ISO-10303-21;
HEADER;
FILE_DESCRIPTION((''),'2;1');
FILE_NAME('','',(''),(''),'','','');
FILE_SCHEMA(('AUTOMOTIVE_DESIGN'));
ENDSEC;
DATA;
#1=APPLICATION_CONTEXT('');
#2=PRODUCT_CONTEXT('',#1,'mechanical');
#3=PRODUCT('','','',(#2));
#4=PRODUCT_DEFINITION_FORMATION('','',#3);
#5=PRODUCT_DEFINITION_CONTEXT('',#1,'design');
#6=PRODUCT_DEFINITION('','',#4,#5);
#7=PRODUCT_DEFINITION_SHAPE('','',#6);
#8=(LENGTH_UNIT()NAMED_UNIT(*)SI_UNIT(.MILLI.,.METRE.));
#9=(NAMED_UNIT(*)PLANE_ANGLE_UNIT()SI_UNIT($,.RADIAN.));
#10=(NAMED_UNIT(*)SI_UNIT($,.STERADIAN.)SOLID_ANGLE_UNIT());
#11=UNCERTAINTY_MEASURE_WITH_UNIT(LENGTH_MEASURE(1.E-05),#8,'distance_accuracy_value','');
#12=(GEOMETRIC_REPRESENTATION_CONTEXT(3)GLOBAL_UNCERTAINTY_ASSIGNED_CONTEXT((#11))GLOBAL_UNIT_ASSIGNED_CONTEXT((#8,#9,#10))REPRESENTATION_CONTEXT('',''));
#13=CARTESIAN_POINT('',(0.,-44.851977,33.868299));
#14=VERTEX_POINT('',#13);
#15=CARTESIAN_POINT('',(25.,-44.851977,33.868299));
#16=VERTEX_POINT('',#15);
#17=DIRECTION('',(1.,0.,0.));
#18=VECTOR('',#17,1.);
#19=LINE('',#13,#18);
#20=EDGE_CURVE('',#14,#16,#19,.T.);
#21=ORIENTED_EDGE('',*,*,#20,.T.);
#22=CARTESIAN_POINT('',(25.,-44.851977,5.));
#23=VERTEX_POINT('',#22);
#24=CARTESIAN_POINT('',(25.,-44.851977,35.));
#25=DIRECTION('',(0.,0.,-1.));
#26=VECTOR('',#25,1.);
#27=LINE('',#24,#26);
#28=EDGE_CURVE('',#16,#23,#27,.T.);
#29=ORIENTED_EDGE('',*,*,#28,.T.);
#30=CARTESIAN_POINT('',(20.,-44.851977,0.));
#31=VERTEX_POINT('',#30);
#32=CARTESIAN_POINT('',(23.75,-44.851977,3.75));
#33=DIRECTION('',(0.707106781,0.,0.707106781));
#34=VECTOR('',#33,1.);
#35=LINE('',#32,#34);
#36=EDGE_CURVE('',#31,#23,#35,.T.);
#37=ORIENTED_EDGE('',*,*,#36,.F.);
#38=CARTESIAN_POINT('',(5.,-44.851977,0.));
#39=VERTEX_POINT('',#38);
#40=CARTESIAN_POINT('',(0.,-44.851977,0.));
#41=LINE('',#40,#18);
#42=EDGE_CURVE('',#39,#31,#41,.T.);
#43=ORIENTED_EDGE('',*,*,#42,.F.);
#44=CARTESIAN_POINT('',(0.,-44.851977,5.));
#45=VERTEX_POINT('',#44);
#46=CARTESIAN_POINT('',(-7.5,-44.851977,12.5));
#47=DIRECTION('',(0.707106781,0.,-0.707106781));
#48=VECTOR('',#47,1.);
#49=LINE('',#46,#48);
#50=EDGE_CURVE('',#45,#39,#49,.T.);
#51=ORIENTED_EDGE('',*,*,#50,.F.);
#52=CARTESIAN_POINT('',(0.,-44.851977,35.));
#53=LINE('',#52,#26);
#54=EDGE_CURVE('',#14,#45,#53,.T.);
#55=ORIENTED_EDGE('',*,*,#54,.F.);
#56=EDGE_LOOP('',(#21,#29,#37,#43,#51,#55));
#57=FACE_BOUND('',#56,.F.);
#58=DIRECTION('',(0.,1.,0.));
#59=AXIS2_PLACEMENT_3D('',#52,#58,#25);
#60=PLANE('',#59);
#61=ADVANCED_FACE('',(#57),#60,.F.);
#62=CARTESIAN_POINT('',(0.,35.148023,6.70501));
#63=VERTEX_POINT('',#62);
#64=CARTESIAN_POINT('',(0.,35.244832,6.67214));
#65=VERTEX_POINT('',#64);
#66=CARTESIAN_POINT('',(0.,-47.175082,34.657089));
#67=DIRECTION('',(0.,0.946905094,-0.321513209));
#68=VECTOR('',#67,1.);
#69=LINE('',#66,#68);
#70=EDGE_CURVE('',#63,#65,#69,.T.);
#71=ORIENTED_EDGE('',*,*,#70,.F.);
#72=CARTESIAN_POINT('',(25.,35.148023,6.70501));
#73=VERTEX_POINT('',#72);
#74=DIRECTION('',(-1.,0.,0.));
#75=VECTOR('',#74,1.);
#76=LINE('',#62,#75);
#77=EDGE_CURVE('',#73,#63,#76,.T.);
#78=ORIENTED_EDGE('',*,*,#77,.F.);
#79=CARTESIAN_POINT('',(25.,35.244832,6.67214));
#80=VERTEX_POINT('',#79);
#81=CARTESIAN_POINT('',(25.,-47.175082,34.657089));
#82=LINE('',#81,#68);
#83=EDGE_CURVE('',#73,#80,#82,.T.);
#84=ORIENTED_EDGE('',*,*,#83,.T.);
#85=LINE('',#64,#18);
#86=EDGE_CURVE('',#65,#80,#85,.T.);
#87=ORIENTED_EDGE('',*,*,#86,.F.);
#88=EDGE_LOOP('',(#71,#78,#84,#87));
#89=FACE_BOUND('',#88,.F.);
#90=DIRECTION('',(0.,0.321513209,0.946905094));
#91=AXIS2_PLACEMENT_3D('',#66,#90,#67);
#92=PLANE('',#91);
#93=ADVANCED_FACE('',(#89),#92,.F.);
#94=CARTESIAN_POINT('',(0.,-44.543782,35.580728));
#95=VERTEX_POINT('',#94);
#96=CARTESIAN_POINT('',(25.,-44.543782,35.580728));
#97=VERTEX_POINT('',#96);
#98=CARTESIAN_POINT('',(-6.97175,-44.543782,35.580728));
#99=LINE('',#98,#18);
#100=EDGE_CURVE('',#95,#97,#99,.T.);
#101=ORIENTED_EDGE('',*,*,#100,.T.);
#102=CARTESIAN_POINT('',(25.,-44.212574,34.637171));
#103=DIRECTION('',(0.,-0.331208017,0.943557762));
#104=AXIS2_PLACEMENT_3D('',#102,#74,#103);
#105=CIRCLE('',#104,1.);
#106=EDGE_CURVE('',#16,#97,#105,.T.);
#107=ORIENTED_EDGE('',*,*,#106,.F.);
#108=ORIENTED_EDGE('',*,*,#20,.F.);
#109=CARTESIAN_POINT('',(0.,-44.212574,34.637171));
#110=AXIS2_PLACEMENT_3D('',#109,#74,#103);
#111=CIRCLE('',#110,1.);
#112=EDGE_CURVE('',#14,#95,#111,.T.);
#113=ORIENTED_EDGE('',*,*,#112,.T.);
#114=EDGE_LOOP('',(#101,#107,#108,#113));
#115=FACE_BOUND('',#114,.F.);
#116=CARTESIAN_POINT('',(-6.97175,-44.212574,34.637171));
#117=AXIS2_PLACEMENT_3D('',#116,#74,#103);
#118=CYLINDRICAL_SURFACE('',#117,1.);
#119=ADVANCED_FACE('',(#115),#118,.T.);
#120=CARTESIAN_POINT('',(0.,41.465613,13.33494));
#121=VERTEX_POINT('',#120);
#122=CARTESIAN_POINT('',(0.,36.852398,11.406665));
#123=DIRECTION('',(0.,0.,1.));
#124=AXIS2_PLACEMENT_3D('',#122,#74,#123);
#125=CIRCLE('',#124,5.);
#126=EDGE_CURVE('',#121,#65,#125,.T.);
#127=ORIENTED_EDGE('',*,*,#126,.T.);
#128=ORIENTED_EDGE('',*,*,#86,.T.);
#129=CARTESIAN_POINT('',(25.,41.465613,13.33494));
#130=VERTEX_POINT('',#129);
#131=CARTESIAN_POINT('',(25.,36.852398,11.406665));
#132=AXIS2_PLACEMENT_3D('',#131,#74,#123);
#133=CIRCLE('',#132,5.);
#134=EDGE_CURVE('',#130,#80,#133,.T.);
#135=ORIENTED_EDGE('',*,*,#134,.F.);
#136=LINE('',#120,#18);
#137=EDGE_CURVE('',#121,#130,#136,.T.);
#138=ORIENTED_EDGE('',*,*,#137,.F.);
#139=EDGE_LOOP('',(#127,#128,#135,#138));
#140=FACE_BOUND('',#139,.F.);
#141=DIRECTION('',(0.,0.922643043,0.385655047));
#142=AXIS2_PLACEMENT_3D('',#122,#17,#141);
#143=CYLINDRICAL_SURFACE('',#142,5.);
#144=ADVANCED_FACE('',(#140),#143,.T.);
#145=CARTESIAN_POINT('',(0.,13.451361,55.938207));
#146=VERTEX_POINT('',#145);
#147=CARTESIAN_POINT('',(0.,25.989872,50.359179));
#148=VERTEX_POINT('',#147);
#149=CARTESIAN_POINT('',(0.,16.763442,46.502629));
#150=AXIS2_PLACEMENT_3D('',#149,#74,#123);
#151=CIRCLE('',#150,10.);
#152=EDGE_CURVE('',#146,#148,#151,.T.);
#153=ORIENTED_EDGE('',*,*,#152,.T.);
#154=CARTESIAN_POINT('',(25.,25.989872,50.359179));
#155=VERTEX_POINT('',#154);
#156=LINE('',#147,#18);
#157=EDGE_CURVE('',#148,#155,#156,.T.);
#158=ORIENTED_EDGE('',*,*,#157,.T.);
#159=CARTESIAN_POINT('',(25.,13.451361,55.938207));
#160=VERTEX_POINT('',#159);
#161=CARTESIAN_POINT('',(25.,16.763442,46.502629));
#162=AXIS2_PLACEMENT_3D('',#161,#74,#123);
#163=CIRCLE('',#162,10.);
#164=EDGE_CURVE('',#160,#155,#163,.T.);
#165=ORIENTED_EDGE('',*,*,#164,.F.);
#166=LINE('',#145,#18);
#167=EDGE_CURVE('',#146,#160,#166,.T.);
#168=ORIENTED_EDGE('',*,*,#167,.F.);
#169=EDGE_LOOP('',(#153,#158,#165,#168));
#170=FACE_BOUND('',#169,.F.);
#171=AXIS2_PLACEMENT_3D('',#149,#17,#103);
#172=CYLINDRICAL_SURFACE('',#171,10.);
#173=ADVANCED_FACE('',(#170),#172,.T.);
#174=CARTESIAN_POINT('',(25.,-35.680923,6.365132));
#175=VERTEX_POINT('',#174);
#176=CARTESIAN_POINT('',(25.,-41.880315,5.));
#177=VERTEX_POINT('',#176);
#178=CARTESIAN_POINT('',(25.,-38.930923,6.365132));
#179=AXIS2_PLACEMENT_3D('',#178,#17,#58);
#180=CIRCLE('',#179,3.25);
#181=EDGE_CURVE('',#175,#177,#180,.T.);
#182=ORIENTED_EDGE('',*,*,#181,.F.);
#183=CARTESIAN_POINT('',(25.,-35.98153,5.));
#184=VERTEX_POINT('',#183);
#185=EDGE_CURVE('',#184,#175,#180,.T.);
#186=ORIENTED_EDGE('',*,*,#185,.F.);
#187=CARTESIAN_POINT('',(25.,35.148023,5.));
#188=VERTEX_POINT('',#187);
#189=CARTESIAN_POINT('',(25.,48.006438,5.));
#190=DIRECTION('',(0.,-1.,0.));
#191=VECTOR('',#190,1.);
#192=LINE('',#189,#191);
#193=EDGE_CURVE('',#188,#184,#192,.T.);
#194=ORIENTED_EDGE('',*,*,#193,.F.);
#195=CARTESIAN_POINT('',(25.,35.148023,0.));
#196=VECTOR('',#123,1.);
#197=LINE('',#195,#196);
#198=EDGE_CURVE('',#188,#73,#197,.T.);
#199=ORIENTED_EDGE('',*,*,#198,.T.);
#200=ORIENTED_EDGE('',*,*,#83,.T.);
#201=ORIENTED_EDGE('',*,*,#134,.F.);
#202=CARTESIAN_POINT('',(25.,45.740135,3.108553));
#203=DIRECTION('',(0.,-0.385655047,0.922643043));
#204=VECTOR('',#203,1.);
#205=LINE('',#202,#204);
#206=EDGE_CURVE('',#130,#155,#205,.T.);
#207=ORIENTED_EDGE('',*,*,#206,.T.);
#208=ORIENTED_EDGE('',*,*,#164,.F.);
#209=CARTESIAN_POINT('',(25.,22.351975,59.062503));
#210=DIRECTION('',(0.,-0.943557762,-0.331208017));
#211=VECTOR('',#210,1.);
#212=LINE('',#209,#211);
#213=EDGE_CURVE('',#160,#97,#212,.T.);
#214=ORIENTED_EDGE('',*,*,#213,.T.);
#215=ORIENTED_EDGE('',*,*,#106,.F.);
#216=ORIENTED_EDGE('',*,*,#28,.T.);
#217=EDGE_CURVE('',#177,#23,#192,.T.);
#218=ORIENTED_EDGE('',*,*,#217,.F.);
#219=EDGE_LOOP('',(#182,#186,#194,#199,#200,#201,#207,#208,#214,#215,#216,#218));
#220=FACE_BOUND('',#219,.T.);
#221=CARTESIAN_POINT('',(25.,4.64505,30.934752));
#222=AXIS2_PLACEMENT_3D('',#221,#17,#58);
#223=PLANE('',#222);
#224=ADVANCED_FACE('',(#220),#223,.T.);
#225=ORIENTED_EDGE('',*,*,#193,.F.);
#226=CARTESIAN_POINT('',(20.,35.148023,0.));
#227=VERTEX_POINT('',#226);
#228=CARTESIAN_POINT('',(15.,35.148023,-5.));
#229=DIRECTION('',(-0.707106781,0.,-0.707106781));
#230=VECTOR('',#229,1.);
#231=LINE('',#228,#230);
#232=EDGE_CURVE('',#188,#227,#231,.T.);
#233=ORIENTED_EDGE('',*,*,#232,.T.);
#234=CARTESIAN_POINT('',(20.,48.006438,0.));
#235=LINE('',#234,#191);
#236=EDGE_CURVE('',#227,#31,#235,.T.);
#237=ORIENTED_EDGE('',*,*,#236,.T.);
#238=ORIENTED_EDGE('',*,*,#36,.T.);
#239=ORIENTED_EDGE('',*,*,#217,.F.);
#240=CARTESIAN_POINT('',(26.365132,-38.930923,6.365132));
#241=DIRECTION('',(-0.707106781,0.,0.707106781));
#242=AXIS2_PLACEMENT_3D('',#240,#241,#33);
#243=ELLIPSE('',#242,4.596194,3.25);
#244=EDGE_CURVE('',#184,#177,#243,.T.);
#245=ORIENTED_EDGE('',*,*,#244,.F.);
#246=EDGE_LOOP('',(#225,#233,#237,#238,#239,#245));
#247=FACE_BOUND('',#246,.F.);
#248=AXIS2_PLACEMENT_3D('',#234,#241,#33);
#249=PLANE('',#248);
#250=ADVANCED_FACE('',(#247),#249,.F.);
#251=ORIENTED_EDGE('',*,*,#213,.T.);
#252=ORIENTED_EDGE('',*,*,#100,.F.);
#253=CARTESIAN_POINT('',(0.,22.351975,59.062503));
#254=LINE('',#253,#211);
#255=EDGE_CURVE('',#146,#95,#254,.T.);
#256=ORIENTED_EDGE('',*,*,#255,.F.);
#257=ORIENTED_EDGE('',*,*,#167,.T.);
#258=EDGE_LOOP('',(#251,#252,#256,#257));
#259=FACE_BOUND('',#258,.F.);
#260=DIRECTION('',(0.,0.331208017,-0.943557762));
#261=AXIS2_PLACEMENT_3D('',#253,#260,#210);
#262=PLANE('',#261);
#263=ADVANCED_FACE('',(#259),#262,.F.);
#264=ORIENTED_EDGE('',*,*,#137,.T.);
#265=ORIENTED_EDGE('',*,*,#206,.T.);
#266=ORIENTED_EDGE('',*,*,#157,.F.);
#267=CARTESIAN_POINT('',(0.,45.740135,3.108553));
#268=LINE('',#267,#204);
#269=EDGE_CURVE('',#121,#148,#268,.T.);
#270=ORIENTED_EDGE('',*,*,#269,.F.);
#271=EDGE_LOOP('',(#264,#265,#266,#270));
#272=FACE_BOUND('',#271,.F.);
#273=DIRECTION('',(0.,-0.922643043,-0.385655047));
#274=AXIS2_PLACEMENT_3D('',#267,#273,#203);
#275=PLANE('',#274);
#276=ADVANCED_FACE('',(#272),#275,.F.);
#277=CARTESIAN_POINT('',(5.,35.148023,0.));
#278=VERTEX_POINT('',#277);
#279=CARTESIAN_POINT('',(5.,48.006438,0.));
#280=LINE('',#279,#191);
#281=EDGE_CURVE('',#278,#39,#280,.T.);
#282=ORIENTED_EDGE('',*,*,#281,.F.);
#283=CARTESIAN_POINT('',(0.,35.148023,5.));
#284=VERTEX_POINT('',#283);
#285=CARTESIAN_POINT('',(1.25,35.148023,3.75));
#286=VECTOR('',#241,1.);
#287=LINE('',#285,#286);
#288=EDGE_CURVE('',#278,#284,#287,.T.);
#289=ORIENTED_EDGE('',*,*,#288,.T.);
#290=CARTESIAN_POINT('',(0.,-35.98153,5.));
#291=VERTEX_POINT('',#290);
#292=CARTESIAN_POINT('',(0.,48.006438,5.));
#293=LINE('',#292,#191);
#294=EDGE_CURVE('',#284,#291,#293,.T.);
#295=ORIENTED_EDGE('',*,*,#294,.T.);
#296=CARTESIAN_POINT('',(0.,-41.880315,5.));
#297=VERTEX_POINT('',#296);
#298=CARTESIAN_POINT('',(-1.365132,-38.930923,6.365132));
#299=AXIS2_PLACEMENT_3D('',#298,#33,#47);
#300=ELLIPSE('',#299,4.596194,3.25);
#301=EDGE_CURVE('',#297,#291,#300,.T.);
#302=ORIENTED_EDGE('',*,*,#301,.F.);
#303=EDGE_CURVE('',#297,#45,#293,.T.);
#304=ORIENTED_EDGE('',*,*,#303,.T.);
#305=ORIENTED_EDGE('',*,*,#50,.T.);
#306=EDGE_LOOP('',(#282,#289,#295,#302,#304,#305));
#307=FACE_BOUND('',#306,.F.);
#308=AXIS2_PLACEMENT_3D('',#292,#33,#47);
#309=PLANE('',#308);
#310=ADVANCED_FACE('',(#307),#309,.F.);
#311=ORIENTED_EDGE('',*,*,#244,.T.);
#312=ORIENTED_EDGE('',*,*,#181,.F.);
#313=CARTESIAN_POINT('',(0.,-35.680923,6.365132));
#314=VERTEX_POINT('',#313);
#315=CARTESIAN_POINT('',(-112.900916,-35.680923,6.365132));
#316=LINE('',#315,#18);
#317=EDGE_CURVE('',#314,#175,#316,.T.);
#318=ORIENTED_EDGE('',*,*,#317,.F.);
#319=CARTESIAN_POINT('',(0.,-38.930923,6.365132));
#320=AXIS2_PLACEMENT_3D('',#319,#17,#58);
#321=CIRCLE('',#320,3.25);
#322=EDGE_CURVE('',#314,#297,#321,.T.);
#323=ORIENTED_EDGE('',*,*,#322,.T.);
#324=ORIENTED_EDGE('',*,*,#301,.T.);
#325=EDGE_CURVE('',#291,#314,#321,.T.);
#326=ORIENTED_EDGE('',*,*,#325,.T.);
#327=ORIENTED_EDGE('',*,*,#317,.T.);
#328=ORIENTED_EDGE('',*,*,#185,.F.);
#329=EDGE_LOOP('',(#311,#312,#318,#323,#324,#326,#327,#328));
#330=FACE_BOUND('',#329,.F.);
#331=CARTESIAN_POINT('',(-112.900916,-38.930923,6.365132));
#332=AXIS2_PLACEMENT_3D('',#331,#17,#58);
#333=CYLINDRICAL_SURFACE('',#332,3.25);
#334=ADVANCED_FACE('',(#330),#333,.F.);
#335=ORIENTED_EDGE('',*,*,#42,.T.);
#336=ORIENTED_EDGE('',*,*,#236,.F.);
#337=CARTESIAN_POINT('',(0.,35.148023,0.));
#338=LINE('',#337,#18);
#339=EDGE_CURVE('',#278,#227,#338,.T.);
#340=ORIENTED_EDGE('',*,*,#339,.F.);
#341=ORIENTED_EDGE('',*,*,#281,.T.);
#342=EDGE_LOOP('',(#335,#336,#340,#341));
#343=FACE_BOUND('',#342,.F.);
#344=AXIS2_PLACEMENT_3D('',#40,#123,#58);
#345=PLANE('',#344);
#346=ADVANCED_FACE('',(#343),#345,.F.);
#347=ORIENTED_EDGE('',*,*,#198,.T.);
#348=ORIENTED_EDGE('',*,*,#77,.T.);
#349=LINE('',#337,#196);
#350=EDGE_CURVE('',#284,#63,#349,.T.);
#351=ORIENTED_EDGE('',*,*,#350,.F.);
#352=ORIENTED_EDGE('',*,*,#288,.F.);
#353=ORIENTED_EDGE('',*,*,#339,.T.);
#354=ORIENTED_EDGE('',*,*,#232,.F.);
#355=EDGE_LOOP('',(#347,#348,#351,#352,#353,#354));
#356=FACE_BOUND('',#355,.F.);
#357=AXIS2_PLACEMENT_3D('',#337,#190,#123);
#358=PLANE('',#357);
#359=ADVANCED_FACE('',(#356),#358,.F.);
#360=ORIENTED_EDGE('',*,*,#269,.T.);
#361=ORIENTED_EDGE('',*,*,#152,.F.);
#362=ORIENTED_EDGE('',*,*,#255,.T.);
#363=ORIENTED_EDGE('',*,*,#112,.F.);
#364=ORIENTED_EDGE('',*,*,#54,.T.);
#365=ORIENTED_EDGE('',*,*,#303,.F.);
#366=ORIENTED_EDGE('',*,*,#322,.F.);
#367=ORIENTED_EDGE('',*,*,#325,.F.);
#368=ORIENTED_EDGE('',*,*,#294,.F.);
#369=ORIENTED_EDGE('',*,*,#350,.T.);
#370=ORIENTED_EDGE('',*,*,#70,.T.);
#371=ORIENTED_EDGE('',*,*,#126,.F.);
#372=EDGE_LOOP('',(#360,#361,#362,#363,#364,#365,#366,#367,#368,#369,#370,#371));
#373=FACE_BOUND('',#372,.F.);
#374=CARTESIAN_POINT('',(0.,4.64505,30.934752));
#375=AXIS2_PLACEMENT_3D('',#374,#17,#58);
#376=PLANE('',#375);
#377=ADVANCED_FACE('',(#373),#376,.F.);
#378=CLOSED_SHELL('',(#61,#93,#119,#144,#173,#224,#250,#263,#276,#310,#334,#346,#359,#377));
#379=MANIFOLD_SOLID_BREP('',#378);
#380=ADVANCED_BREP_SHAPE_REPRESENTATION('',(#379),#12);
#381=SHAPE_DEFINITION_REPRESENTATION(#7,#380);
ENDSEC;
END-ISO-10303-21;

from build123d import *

# Parameters (mm, degrees)
F1_DEPTH     = 25
F3_DEPTH     = 25
F5_D         = 6.5
F6_R         = 10
F7_R         = 5
F8_T1_DEPTH  = 38.943500224
F9_T1_DEPTH  = 105.7168298797
F10_T1_DEPTH = 105.7168298797


# Not quite as in the source:
# - a fillet or chamfer that OpenCascade refuses, or shapes differently, is made with other operations: its cross-section is extruded or revolved along the edge and cut away or added


with BuildPart() as f1:
    # F0 (on Right) → F1 (new body)
    with BuildSketch(Plane.YZ):
        Polygon((-44.8519773781, 0), (35.1480226219, 0), (35.1480226219, 27.3848697543), (-44.8519773781, 35), align=None)
    extrude(amount=F1_DEPTH)

    # F2 (on Right) → F3 (join)
    with BuildSketch(Plane.YZ):
        Polygon((-47.1750815473, 34.6570886492), (45.7401350141, 3.1085526571), (22.3519746214, 59.0625032783), align=None)
    extrude(amount=F3_DEPTH)

    # F5 (through all)
    with Locations(Plane(origin=(0, 0, 0), x_dir=(0, -1, 0), z_dir=(-1, 0, 0))):
        with Locations((38.9309227467, 6.3651315868)):
            Hole(F5_D / 2)

    # F6
    f6_edges = [f1.edges().sort_by_distance(p)[0] for p in [
        (12.5, 22.351975, 59.062503),
    ]]
    fillet(f6_edges, radius=F6_R)

    # F7
    f7_edges = [f1.edges().sort_by_distance(p)[0] for p in [
        (12.5, 45.740135, 3.108553),
    ]]
    fillet(f7_edges, radius=F7_R)

    # F8: fillet of radius 1 on 1 edges, made by hand

    # F8_s2 → F8_t1 (cut)
    with BuildSketch(Plane.YZ.offset(-6.971750112)):
        with BuildLine():
            ThreePointArc((-44.5437819752, 35.580728461), (-45.1967614755, 34.8143003997), (-44.8519773781, 33.8682992754))
            Line((-44.8519773781, 33.8682992754), (-44.8647654465, 33.8529218469))
            ThreePointArc((-44.8647654465, 33.8529218469), (-46.0199597269, 34.2437558604), (-47.1815118114, 34.6381505473))
            Line((-47.1815118114, 34.6381505473), (-47.1817057076, 34.6759598045))
            Line((-47.1817057076, 34.6759598045), (-44.5504061355, 35.5995996162))
            Line((-44.5504061355, 35.5995996162), (-44.5437819752, 35.580728461))
        make_face()
    extrude(amount=F8_T1_DEPTH, mode=Mode.SUBTRACT)

    # F9: chamfer of 5 on 1 edges, made by hand

    # F9_s2 → F9_t1 (cut)
    with BuildSketch(Plane.XZ.offset(-48.0064375617)):
        Polygon((20, 0), (25, 5), (25, 0), align=None)
    extrude(amount=F9_T1_DEPTH, mode=Mode.SUBTRACT)

    # F10: chamfer of 5 on 1 edges, made by hand

    # F10_s2 → F10_t1 (cut)
    with BuildSketch(Plane.XZ.offset(-48.0064375617)):
        Polygon((0, 5), (5, 0), (0, 0), align=None)
    extrude(amount=F10_T1_DEPTH, mode=Mode.SUBTRACT)


solid = f1.part
